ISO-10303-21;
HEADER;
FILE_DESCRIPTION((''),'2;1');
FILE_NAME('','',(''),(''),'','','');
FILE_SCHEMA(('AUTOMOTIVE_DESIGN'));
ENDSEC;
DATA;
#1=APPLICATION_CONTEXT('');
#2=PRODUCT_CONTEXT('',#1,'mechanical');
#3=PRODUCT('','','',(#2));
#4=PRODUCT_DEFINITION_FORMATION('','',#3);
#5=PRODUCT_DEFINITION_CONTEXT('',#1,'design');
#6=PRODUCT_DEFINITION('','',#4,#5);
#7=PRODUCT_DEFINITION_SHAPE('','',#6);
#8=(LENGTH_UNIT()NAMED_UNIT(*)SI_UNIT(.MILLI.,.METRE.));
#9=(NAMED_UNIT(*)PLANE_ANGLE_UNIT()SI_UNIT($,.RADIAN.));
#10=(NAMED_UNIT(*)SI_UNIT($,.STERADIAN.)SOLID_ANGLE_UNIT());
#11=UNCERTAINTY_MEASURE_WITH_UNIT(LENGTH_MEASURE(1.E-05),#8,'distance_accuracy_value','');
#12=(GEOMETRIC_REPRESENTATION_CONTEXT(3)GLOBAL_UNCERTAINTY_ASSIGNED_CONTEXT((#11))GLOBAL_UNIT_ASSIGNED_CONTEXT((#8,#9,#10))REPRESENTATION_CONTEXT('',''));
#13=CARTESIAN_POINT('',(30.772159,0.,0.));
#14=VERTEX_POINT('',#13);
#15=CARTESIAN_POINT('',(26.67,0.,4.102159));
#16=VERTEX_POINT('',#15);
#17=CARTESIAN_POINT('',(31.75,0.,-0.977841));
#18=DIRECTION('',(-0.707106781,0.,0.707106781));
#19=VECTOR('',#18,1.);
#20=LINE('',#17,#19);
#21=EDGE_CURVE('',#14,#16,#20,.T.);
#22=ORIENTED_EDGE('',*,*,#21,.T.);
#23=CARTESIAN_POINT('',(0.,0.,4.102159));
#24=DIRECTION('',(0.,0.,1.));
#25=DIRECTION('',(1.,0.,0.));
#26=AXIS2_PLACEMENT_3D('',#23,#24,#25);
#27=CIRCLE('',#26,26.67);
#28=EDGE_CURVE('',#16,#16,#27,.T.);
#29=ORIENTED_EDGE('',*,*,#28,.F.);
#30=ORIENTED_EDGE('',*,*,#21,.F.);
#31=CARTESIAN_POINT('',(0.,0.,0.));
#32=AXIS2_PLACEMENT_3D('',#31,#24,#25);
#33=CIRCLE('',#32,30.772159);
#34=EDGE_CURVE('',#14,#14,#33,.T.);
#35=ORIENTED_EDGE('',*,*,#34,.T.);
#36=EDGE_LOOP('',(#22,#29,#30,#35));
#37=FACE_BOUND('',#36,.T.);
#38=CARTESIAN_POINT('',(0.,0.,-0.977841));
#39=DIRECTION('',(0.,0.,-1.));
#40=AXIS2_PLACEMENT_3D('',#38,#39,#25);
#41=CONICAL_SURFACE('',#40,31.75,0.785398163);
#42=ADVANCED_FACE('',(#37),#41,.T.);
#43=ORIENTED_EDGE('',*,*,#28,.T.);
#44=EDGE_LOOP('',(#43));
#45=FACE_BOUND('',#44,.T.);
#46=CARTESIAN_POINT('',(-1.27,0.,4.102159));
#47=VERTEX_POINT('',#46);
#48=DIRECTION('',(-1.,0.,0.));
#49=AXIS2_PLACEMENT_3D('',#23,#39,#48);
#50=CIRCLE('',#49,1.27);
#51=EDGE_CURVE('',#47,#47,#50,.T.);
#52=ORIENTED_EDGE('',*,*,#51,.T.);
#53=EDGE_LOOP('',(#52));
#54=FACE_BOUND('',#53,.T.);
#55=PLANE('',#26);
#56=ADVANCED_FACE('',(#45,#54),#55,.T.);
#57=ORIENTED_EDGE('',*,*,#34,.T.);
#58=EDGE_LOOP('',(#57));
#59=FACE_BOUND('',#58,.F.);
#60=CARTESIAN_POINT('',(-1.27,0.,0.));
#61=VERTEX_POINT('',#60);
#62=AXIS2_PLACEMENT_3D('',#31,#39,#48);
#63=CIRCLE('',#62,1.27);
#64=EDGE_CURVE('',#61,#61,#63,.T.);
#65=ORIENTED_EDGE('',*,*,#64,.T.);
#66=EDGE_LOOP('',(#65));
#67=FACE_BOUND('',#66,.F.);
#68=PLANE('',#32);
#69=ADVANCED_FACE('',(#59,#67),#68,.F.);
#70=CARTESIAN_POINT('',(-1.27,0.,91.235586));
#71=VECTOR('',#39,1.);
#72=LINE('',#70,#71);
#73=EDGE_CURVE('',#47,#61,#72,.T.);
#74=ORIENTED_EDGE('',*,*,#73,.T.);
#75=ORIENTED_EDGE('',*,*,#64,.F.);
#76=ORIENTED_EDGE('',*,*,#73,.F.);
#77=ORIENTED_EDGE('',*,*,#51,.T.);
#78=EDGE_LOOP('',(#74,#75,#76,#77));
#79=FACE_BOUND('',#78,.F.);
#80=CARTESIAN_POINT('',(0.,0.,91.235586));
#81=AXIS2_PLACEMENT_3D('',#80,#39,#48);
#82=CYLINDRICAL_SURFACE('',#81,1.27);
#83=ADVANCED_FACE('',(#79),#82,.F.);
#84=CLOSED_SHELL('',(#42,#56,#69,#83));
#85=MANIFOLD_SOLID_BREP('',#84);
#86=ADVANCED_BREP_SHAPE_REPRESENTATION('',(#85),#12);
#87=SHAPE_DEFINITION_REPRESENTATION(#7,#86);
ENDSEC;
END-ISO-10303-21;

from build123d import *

# Parameters (mm, degrees)
F0_R     = 31.75
F1_DEPTH = 4.1021592915
F5_D     = 2.54


# Not quite as in the source:
# - a fillet or chamfer that OpenCascade refuses, or shapes differently, is made with other operations: its cross-section is extruded or revolved along the edge and cut away or added
# - the program builds the solid bodies; features that only make, move or delete a surface that nothing else refers to are left out


with BuildPart() as f1:
    # F0 (on Top) → F1 (new body)
    with BuildSketch(Plane.XY):
        Circle(F0_R)
    extrude(amount=F1_DEPTH)

    # F2: chamfer of 5.08 on 1 edges, made by hand

    # F2_s1 → F2_t2 (revolve, cut)
    with BuildSketch(Plane.XZ):
        Polygon((31.75, -0.9778407085), (26.67, 4.1021592915), (31.75, 4.1021592915), align=None)
    revolve(axis=Axis((0, 0, 4.1021592915), (0, 0, 1)), mode=Mode.SUBTRACT)

    # F5 (through all)
    with Locations(Plane.XY.offset(4.1021592915)):
        with Locations((0, 0)):
            Hole(F5_D / 2)


solid = f1.part
